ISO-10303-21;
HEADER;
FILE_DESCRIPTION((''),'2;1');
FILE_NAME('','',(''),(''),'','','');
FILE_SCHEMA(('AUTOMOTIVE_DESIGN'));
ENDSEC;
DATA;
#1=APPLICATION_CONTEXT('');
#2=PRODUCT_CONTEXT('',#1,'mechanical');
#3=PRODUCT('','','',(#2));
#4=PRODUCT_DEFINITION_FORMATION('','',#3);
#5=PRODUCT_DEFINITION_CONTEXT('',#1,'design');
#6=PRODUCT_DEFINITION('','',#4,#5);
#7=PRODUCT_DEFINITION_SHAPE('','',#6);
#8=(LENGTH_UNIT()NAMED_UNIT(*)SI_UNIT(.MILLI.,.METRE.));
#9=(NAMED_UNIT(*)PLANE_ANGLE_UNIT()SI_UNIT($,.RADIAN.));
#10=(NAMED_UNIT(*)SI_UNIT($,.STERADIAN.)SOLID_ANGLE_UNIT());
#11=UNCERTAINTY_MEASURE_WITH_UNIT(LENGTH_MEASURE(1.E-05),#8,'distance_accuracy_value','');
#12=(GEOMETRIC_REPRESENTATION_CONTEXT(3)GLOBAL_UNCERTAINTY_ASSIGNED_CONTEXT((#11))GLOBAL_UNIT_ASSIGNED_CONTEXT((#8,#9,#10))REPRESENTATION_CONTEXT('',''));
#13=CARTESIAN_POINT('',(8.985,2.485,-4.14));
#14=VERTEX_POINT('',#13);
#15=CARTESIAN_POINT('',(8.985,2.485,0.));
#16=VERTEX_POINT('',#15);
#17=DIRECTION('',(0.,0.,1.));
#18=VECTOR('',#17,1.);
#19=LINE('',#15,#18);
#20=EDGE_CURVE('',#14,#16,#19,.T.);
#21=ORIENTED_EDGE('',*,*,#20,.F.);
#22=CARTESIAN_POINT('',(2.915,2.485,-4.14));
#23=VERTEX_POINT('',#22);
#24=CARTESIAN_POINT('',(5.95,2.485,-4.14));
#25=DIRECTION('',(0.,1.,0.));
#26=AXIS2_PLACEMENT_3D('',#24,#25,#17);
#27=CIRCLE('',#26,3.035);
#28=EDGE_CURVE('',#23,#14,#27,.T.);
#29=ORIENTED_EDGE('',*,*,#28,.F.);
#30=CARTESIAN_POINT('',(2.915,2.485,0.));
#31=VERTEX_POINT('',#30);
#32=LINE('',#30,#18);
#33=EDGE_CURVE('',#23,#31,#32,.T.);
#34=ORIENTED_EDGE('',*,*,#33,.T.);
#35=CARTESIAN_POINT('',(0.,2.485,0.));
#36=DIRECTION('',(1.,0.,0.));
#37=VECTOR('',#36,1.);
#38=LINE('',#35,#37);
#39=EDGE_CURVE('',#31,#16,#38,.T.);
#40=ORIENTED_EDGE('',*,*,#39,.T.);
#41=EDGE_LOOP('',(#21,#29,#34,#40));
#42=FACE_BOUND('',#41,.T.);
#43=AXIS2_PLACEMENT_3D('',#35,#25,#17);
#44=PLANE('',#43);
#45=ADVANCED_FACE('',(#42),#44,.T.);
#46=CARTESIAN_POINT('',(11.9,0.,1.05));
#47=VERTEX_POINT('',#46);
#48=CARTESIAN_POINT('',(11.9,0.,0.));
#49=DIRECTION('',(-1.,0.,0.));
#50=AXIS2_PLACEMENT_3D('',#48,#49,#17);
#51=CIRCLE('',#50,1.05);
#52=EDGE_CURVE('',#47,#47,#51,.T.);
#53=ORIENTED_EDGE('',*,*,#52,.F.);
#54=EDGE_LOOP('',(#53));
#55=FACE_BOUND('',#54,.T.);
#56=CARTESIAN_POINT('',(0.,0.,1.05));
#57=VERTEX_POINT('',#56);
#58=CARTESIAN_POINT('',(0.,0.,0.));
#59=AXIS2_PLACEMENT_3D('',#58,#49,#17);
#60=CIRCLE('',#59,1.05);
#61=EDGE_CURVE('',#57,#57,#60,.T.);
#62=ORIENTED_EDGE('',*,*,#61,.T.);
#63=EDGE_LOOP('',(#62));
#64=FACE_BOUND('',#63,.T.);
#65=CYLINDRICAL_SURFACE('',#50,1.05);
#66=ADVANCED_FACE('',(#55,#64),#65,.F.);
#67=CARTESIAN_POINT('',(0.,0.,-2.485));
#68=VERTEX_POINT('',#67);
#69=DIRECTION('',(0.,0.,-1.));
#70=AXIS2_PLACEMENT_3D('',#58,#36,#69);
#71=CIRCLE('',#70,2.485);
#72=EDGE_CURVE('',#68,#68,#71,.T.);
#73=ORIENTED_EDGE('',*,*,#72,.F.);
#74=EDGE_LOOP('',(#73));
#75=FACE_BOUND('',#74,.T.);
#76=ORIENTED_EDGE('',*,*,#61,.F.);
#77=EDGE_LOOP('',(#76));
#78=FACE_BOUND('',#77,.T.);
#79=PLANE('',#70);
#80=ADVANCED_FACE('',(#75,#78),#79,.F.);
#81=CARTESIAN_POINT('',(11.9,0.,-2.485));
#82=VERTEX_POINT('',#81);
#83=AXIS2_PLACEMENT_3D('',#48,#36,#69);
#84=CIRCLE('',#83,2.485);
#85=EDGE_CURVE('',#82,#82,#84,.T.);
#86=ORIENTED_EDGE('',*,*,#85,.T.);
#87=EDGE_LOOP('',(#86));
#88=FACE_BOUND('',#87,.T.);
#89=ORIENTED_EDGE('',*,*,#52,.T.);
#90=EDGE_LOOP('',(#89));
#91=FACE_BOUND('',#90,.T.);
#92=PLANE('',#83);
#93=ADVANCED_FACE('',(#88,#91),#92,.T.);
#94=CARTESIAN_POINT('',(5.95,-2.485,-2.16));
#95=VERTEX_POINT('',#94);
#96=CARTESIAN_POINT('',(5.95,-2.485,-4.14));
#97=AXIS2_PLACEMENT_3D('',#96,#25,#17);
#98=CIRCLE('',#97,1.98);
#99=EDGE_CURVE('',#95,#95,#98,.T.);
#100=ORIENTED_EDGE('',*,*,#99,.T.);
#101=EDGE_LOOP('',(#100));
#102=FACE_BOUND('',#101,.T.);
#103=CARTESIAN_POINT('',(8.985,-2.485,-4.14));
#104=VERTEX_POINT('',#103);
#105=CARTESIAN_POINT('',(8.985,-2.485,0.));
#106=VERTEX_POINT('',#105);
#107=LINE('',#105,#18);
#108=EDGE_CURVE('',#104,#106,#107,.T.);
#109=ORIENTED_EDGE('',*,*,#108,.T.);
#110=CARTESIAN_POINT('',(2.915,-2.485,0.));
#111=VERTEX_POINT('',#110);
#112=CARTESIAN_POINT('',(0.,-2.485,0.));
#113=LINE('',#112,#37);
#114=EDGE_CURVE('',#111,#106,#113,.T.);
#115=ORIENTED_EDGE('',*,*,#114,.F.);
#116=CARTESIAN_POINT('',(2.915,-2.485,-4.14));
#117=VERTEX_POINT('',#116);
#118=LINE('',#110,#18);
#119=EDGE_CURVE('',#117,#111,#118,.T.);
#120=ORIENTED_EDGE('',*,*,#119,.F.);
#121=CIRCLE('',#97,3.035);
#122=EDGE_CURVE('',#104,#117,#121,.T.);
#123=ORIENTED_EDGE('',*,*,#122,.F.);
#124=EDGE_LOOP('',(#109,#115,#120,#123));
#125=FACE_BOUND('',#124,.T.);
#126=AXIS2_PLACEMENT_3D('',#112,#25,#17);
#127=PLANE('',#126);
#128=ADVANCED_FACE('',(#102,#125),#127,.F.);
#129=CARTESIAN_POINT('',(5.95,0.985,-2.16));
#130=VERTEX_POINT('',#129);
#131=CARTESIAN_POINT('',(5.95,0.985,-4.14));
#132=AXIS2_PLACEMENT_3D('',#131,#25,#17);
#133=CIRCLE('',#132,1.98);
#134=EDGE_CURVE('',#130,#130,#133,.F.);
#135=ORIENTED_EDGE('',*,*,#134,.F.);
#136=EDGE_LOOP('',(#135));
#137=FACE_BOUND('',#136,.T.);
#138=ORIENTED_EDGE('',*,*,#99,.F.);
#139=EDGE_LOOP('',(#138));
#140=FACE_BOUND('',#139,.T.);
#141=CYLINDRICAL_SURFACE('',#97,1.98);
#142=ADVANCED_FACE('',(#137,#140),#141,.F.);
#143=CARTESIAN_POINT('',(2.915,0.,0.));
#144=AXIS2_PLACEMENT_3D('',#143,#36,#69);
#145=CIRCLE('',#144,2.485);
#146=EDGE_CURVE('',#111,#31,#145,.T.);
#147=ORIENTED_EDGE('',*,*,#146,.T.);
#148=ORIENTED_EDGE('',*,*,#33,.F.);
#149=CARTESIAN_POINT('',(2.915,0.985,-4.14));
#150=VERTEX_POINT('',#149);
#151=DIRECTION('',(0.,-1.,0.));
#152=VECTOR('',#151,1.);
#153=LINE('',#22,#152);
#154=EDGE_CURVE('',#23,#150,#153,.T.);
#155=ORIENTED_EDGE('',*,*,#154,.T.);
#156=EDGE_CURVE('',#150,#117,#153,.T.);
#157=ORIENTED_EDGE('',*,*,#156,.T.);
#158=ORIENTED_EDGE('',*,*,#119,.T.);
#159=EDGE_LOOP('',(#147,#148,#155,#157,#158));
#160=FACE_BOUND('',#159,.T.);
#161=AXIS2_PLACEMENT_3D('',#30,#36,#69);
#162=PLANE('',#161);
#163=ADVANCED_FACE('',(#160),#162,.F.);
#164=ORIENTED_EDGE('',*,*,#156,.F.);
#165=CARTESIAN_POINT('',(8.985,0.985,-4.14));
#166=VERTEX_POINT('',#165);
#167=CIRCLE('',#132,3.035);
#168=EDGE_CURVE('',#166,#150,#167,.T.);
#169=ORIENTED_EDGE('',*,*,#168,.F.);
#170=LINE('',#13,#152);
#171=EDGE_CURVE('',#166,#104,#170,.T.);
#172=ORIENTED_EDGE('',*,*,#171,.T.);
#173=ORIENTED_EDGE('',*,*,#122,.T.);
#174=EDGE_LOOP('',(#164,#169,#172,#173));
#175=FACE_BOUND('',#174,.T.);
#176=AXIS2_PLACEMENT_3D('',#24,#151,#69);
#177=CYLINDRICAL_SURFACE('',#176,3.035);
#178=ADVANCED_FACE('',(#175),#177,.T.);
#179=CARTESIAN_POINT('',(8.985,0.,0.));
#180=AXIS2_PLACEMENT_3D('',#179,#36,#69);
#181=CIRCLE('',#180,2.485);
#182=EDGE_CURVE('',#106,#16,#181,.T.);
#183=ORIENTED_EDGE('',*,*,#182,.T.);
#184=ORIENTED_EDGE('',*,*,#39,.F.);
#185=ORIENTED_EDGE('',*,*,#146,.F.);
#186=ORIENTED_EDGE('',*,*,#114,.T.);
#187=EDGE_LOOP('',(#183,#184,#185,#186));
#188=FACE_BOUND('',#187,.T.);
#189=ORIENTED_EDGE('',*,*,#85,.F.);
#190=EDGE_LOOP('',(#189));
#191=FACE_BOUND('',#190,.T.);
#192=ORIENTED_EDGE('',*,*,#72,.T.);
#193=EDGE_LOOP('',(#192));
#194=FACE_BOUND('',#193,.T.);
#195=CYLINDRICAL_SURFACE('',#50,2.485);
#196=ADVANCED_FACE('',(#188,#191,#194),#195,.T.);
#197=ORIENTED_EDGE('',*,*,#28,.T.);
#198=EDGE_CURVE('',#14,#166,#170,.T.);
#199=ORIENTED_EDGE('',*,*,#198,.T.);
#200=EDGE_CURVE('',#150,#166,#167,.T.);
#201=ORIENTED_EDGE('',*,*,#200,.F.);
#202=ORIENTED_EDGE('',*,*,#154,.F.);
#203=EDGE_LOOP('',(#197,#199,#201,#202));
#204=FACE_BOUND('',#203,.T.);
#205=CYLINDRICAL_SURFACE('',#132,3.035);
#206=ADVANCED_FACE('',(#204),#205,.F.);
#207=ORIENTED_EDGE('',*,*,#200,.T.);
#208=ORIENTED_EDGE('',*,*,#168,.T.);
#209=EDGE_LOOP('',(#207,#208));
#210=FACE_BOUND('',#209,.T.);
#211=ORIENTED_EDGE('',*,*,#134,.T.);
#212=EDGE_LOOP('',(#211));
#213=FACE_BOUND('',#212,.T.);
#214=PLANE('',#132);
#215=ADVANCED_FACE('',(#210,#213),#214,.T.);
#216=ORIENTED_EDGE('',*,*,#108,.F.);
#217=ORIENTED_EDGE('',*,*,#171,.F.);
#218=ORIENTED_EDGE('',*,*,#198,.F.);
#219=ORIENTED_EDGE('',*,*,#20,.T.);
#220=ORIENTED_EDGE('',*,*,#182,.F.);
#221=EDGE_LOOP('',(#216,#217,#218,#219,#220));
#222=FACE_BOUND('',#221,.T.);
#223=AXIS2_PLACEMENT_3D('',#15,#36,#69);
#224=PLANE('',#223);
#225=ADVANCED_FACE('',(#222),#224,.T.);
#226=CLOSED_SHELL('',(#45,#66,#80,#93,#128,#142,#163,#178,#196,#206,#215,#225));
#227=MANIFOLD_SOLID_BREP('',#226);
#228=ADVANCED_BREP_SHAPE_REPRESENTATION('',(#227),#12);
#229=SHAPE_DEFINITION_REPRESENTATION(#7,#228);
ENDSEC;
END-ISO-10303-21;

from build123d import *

# Parameters (mm, degrees)
SCHIZZO1_R                   = 2.485
ESTRUSIONE_ESTRUSIONE1_DEPTH = 11.9
ESTRUSIONE_ESTRUSIONE2_DEPTH = 2.485
SCHIZZO3_R                   = 1.98
TAGLIO_ESTRUSIONE1_DEPTH     = 15.757761517
SCHIZZO4_R                   = 1.05
TAGLIO_ESTRUSIONE2_DEPTH     = 15.116155638
SCHIZZO5_R                   = 3.035
TAGLIO_ESTRUSIONE3_DEPTH     = 1.5


with BuildPart() as part:
    # Schizzo1 → Estrusione-Estrusione1 (new body)
    with BuildSketch(Plane(origin=(0, 0, 0), x_dir=(0, 0, -1), z_dir=(1, 0, 0))):
        Circle(SCHIZZO1_R)
    extrude(amount=ESTRUSIONE_ESTRUSIONE1_DEPTH)

    # Schizzo2 → Estrusione-Estrusione2 (add, symmetric)
    with BuildSketch(Plane(origin=(0, 0, 0), x_dir=(1, 0, 0), z_dir=(0, 1, 0))):
        with BuildLine():
            Line((8.985, 0), (8.985, 4.14))
            ThreePointArc((8.985, 4.14), (5.95, 7.175), (2.915, 4.14))
            Line((2.915, 4.14), (2.915, 0))
            Line((2.915, 0), (8.985, 0))
        make_face()
    extrude(amount=ESTRUSIONE_ESTRUSIONE2_DEPTH, both=True)

    # Schizzo3 → Taglio-Estrusione1 (cut, through all)
    with BuildSketch(Plane(origin=(0, 2.485, 0), x_dir=(1, 0, 0), z_dir=(0, 1, 0))):
        with Locations((5.95, 4.14)):
            Circle(SCHIZZO3_R)
    extrude(amount=-TAGLIO_ESTRUSIONE1_DEPTH, mode=Mode.SUBTRACT)

    # Schizzo4 → Taglio-Estrusione2 (cut, through all)
    with BuildSketch(Plane.ZY):
        Circle(SCHIZZO4_R)
    extrude(amount=-TAGLIO_ESTRUSIONE2_DEPTH, mode=Mode.SUBTRACT)

    # Schizzo5 → Taglio-Estrusione3 (cut)
    with BuildSketch(Plane(origin=(0, 2.485, 0), x_dir=(1, 0, 0), z_dir=(0, 1, 0))):
        with Locations((5.95, 4.14)):
            Circle(SCHIZZO5_R)
    extrude(amount=-TAGLIO_ESTRUSIONE3_DEPTH, mode=Mode.SUBTRACT)


solid = part.part
